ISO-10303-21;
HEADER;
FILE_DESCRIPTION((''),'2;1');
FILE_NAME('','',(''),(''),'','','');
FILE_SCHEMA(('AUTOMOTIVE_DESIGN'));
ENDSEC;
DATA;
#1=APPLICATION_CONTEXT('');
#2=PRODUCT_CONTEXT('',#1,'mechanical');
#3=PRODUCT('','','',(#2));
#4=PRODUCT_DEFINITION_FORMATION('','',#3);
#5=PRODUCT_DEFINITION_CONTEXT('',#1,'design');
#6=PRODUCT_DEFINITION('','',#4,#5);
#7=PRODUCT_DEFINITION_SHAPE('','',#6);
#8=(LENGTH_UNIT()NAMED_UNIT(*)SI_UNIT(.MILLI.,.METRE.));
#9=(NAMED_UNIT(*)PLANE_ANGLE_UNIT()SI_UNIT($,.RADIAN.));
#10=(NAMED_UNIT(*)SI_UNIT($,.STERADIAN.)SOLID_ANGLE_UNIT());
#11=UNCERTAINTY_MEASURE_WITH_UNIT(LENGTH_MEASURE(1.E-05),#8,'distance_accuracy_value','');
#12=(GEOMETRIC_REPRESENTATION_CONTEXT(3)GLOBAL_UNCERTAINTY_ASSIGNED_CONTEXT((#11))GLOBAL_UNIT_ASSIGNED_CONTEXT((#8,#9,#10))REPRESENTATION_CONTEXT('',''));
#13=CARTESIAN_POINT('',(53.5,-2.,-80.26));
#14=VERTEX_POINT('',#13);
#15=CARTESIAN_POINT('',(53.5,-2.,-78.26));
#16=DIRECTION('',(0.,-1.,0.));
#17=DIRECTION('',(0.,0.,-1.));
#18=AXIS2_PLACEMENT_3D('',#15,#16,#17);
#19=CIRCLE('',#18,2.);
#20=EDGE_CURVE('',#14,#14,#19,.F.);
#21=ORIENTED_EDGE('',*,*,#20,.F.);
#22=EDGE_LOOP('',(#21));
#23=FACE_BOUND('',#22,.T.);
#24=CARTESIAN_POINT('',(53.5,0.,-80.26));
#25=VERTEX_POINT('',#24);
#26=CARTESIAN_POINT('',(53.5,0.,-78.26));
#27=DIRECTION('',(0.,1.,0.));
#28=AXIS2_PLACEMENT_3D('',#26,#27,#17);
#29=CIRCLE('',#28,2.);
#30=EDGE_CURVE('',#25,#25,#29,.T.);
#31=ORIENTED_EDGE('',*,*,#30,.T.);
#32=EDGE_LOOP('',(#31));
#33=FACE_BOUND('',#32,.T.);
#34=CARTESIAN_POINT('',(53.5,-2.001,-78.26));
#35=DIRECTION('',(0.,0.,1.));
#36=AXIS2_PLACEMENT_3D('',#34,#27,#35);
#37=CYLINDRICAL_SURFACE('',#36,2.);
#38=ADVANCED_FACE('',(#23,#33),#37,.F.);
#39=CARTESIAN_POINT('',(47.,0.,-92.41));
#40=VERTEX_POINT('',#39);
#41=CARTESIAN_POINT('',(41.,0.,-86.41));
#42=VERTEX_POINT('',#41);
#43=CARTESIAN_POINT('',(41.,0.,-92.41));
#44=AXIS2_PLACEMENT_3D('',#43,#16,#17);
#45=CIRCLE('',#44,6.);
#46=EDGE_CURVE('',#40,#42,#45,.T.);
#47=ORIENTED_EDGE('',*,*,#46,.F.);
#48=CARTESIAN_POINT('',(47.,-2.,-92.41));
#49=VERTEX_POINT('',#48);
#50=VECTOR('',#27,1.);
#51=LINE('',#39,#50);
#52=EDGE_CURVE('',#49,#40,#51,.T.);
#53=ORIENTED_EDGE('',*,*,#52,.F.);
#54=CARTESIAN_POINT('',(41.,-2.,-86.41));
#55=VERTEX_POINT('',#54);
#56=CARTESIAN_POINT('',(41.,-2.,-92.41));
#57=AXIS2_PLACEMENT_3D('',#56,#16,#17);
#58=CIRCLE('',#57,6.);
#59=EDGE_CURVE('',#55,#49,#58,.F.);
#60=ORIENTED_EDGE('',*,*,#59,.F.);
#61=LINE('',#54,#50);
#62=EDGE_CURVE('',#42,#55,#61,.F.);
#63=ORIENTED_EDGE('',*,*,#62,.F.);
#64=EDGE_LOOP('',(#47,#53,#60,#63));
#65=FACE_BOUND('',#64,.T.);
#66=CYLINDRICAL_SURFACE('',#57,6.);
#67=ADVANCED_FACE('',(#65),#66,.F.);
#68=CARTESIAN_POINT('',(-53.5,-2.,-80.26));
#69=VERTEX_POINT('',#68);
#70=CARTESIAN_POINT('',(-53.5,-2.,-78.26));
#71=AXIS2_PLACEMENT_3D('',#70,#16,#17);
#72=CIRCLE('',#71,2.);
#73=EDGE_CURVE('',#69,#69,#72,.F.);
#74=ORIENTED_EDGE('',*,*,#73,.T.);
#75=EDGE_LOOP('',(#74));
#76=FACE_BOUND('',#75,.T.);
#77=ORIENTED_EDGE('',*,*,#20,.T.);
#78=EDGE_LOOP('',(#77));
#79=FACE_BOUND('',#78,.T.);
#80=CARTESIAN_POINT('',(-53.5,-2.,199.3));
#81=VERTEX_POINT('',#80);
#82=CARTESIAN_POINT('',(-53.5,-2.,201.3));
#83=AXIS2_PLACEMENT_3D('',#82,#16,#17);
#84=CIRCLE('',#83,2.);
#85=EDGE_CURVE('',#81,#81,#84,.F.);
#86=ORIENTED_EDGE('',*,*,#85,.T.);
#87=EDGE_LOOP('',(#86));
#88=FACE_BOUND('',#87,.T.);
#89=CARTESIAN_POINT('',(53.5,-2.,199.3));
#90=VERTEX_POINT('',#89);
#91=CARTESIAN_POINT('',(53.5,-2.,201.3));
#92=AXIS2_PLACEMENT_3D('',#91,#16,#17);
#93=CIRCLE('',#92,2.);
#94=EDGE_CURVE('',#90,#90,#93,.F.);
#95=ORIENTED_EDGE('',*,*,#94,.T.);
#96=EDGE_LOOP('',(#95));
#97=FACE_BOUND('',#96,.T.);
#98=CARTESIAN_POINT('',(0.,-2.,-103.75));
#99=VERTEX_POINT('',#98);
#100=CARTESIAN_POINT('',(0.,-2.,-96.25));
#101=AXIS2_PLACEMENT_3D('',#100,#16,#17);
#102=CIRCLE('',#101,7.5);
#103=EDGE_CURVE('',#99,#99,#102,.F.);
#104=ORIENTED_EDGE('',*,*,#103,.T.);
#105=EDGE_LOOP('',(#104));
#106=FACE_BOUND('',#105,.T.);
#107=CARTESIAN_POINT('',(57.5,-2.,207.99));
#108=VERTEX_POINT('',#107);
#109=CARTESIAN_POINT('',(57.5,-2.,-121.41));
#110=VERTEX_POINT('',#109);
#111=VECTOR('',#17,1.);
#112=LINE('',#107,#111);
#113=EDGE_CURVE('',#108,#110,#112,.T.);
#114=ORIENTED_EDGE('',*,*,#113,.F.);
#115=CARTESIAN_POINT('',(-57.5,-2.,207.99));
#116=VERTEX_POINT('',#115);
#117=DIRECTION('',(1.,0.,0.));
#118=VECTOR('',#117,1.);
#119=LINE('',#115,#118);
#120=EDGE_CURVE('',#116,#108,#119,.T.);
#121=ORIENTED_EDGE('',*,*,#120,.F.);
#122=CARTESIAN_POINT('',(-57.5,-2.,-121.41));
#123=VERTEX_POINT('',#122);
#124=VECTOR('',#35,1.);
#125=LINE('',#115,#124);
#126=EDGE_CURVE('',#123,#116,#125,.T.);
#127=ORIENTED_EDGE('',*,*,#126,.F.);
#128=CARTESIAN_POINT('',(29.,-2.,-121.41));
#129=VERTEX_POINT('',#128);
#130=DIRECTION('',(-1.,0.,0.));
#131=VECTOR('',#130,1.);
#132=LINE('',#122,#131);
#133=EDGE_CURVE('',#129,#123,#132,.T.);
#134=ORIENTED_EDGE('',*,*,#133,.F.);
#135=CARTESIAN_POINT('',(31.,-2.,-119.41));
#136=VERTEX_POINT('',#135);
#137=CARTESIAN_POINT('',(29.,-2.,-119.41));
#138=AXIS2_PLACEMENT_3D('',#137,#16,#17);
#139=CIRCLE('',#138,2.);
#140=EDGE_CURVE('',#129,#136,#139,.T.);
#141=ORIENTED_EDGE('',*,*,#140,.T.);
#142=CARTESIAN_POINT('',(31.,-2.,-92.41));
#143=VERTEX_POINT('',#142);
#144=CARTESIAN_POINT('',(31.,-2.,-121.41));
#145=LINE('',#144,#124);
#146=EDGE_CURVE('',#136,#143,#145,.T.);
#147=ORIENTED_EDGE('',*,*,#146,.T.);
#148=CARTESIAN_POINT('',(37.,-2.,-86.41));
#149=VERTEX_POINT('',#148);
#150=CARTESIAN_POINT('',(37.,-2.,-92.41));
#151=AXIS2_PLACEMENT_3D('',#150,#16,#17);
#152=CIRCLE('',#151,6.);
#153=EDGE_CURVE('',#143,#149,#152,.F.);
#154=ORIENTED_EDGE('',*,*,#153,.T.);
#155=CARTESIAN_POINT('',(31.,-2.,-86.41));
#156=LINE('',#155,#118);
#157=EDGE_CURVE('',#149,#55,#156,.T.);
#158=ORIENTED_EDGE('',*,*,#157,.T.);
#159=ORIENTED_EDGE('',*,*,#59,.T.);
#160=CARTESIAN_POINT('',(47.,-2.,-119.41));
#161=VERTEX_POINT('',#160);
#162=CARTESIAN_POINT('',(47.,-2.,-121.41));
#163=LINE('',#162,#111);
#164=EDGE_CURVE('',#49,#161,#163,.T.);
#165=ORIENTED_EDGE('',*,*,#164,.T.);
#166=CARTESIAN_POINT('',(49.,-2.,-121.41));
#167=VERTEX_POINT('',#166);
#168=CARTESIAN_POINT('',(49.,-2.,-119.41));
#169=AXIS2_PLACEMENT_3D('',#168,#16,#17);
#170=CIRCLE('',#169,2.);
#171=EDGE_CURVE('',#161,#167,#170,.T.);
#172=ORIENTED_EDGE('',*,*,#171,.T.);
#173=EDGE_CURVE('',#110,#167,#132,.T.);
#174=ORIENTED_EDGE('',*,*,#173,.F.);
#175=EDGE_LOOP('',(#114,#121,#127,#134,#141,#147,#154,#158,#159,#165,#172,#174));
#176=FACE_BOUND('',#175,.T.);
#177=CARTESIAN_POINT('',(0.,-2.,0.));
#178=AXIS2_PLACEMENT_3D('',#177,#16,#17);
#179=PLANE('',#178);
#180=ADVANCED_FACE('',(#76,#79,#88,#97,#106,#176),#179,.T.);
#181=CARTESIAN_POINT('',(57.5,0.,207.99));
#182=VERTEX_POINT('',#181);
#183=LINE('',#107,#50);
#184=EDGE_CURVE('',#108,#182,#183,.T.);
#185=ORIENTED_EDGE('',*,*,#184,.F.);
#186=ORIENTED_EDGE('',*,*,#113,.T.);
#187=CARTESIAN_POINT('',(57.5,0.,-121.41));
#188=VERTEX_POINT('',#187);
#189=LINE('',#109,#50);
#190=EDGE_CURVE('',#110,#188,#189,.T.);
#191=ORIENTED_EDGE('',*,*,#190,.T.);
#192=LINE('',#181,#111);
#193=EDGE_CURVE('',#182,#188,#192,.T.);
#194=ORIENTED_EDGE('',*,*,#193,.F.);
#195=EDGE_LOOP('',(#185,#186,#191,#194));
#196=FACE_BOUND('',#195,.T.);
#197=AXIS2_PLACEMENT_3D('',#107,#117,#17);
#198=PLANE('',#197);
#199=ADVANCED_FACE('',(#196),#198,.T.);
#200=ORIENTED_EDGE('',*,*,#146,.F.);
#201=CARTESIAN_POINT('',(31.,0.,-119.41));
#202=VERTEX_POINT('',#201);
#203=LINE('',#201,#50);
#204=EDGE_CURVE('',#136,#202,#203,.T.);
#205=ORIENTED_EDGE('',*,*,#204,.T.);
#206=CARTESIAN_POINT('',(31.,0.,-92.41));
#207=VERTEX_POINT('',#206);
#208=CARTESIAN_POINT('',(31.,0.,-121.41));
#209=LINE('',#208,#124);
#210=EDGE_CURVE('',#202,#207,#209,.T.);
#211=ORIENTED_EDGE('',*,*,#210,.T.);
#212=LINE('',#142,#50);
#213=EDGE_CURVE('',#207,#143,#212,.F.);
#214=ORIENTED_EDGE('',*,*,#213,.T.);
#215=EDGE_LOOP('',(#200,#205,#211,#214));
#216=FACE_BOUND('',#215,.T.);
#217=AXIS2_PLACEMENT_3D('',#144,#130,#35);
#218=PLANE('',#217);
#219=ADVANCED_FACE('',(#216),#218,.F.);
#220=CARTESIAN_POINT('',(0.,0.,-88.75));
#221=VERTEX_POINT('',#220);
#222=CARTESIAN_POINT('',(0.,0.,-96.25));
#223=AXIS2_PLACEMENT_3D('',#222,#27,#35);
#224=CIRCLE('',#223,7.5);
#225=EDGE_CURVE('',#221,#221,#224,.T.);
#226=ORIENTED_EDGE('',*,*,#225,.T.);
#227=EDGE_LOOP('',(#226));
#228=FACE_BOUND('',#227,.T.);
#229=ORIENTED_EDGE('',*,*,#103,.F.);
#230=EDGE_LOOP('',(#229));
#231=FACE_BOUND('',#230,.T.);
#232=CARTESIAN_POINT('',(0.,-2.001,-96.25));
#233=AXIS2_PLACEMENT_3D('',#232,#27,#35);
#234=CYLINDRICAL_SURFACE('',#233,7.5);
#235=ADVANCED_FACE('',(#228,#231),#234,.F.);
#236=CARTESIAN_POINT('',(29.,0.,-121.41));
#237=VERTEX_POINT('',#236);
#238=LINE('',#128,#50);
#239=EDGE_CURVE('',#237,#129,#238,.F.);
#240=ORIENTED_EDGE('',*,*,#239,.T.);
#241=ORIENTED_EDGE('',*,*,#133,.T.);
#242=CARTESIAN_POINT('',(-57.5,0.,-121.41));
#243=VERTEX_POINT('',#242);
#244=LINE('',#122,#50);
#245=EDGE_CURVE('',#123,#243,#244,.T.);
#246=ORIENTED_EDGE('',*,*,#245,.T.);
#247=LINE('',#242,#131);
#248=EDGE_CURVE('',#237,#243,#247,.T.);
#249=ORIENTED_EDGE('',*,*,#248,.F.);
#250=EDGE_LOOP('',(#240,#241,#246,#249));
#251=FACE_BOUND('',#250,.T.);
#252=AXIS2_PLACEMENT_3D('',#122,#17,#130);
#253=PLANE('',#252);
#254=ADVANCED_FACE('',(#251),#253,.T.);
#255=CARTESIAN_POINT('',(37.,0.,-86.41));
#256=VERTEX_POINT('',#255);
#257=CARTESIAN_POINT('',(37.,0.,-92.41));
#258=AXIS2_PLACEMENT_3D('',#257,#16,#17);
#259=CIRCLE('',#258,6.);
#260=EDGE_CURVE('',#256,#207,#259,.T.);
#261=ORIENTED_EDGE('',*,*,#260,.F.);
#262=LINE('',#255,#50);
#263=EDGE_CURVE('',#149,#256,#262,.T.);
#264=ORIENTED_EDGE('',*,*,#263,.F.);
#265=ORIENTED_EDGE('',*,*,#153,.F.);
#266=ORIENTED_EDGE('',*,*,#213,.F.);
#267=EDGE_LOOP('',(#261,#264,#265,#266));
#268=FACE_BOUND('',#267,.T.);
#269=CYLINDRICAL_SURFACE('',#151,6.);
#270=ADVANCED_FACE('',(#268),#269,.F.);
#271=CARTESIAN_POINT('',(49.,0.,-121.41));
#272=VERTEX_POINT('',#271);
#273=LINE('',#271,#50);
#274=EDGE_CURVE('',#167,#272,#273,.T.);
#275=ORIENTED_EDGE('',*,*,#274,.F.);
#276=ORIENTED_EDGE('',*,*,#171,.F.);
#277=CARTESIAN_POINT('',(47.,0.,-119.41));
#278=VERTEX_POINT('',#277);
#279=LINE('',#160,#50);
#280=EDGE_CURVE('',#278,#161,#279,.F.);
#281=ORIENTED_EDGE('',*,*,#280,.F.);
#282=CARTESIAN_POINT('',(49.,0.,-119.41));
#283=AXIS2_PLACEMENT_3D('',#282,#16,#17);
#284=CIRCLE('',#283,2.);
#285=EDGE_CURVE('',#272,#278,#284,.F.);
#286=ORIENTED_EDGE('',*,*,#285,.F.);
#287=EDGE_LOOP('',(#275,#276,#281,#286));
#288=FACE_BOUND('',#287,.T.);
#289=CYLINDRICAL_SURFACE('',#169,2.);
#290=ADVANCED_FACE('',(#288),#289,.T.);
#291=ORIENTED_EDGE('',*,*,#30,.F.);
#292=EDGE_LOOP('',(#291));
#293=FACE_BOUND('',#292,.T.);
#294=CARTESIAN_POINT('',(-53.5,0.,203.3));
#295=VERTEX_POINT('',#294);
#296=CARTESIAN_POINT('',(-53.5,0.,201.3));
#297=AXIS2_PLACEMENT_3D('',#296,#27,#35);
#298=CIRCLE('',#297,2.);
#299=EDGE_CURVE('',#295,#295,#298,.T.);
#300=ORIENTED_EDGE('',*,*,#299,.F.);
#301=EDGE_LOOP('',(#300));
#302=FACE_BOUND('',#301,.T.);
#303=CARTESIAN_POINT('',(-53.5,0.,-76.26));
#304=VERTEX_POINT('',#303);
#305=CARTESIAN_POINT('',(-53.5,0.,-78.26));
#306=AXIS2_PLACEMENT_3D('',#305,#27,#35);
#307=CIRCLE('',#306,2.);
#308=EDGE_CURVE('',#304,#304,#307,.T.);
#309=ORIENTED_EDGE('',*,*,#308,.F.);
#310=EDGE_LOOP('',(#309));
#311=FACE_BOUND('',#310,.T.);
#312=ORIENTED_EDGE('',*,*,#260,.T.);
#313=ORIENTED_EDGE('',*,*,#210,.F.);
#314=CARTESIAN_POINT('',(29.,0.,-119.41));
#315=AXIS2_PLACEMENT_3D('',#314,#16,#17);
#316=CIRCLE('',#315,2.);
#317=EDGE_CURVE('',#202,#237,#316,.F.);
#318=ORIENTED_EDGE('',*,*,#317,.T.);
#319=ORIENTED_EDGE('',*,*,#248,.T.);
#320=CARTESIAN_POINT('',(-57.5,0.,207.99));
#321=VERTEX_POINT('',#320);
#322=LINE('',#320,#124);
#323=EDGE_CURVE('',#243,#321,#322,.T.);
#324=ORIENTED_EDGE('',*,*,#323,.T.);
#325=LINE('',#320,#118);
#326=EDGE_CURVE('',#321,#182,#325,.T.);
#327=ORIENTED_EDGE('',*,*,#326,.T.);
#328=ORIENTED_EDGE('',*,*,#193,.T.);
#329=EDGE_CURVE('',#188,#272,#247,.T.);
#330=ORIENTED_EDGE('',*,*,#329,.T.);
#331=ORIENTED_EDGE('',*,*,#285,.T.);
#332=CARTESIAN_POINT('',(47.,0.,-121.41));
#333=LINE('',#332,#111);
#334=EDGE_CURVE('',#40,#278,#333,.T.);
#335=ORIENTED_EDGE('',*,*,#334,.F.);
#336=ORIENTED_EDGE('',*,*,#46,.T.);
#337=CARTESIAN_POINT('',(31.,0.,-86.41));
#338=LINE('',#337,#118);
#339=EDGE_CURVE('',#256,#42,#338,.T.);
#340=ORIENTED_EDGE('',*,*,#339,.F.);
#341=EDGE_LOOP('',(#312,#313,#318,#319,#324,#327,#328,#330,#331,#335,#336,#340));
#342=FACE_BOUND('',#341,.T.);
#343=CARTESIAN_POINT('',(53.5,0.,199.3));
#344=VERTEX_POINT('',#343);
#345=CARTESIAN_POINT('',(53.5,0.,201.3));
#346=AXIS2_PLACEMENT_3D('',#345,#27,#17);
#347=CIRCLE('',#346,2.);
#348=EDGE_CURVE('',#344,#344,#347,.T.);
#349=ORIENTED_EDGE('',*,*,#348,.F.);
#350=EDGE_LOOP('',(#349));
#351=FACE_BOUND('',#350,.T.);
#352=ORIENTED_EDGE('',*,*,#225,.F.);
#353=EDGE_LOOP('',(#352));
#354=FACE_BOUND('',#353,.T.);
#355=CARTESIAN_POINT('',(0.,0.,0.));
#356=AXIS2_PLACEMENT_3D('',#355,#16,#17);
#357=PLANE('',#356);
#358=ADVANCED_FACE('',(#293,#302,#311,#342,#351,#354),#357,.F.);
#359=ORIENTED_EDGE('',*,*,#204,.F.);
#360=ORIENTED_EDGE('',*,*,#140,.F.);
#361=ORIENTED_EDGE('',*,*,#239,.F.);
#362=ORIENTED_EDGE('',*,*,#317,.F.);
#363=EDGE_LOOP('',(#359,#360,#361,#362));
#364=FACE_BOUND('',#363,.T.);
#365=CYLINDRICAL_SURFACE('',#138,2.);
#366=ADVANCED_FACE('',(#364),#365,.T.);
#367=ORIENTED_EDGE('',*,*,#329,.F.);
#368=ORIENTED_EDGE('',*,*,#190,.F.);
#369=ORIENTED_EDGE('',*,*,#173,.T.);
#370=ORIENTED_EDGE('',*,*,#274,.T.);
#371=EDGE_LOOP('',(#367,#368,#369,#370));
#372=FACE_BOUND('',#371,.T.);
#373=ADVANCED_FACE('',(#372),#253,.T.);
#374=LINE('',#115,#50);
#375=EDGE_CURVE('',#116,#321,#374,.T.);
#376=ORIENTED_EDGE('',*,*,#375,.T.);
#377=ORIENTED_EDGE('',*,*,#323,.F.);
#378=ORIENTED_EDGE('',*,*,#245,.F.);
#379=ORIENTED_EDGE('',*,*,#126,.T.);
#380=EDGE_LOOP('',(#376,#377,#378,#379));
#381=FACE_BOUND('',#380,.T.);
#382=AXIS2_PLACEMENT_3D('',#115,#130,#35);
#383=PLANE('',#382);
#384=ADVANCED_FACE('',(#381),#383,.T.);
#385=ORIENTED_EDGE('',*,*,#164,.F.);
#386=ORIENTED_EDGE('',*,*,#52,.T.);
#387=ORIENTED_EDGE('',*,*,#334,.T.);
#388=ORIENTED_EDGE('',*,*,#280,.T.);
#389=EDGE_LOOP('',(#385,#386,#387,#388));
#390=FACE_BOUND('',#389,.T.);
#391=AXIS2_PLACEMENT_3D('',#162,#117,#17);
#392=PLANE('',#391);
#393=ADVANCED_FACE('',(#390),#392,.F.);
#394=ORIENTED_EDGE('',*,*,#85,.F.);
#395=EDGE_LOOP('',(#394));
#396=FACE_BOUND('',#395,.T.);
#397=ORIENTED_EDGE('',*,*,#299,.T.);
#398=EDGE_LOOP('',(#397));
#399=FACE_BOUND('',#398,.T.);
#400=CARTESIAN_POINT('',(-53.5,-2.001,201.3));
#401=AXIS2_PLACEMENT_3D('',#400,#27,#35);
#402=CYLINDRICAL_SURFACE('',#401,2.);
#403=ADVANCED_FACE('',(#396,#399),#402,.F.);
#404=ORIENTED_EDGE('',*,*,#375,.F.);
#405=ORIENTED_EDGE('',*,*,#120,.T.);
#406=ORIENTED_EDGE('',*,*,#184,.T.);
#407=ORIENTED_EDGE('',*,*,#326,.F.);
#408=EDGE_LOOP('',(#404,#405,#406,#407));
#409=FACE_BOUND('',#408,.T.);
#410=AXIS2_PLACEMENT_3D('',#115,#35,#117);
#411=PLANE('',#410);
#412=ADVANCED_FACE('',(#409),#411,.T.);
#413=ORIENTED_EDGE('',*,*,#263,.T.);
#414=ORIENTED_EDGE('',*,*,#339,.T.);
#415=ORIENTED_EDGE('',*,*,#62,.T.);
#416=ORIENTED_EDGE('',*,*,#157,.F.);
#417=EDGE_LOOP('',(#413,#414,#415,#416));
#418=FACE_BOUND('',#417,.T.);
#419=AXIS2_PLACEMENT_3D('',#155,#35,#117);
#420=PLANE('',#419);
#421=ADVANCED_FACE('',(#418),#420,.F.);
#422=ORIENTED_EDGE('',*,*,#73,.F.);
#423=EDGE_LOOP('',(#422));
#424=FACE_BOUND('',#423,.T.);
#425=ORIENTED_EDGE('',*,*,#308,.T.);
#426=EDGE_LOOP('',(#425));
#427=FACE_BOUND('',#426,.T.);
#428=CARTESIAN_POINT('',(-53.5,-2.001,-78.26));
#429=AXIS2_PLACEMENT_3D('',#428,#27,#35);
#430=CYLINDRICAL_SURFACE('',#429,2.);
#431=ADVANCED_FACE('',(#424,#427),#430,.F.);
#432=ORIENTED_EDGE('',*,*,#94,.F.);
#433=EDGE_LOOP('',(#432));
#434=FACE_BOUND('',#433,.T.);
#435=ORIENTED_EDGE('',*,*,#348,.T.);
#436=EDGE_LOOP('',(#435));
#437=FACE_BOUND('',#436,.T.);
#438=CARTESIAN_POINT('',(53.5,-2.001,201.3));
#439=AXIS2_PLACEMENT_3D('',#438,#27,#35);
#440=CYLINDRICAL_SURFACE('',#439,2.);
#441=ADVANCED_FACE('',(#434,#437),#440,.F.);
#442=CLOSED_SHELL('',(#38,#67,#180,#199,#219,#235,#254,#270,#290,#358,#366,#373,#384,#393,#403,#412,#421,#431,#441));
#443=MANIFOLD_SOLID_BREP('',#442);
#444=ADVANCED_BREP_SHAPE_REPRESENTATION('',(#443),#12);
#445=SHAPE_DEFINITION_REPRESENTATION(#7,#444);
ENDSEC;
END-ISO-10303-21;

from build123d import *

# Parameters (mm, degrees)
CROQUIS12_W           = 115
CROQUIS12_H           = 329.4
BRIDA_BASE2_DEPTH     = 2
CORTAR_EXTRUIR6_REACH = 217.801
CROQUIS27_R           = 2
CORTAR_EXTRUIR7_REACH = 217.801
CROQUIS28_R           = 7.5
CROQUIS29_W           = 16
CROQUIS29_H           = 35
CORTAR_EXTRUIR8_DEPTH = 216.801042861
REDONDEO1_R           = 6
REDONDEO2_R           = 2


# Sheet-metal steps are written as plain solids
with BuildPart() as part:
    # Croquis12 → Brida base2 (new body)
    with BuildSketch(Plane(origin=(0, 0, 0), x_dir=(1, 0, 0), z_dir=(0, 1, 0))):
        with Locations((0, -43.29)):
            Rectangle(CROQUIS12_W, CROQUIS12_H)
    extrude(amount=-BRIDA_BASE2_DEPTH)

    # Croquis27 → Cortar-Extruir6 (cut, up to next)
    with BuildSketch(Plane(origin=(0, 0, 0), x_dir=(1, 0, 0), z_dir=(0, 1, 0)), mode=Mode.PRIVATE) as cortar_extruir6_sk1:
        with Locations(Location((-53.5, -201.3, 0), (0, 0, 270))):
            Circle(CROQUIS27_R)
    cortar_extruir6_tool1 = extrude(cortar_extruir6_sk1.sketch, amount=-CORTAR_EXTRUIR6_REACH, mode=Mode.PRIVATE) & part.part
    # Croquis27 → Cortar-Extruir6 (cut, up to next)
    with BuildSketch(Plane(origin=(0, 0, 0), x_dir=(1, 0, 0), z_dir=(0, 1, 0)), mode=Mode.PRIVATE) as cortar_extruir6_sk2:
        with Locations(Location((-53.5, 78.26, 0), (0, 0, 270))):
            Circle(CROQUIS27_R)
    cortar_extruir6_tool2 = extrude(cortar_extruir6_sk2.sketch, amount=-CORTAR_EXTRUIR6_REACH, mode=Mode.PRIVATE) & part.part
    # Croquis27 → Cortar-Extruir6 (cut, up to next)
    with BuildSketch(Plane(origin=(0, 0, 0), x_dir=(1, 0, 0), z_dir=(0, 1, 0)), mode=Mode.PRIVATE) as cortar_extruir6_sk3:
        with Locations(Location((53.5, 78.26, 0), (0, 0, 90))):
            Circle(CROQUIS27_R)
    cortar_extruir6_tool3 = extrude(cortar_extruir6_sk3.sketch, amount=-CORTAR_EXTRUIR6_REACH, mode=Mode.PRIVATE) & part.part
    # Croquis27 → Cortar-Extruir6 (cut, up to next)
    with BuildSketch(Plane(origin=(0, 0, 0), x_dir=(1, 0, 0), z_dir=(0, 1, 0)), mode=Mode.PRIVATE) as cortar_extruir6_sk4:
        with Locations(Location((53.5, -201.3, 0), (0, 0, 90))):
            Circle(CROQUIS27_R)
    cortar_extruir6_tool4 = extrude(cortar_extruir6_sk4.sketch, amount=-CORTAR_EXTRUIR6_REACH, mode=Mode.PRIVATE) & part.part
    add(cortar_extruir6_tool1.solids().sort_by_distance((-53.5, 0, 201.3))[0], mode=Mode.SUBTRACT)
    add(cortar_extruir6_tool2.solids().sort_by_distance((-53.5, 0, -78.26))[0], mode=Mode.SUBTRACT)
    add(cortar_extruir6_tool3.solids().sort_by_distance((53.5, 0, -78.26))[0], mode=Mode.SUBTRACT)
    add(cortar_extruir6_tool4.solids().sort_by_distance((53.5, 0, 201.3))[0], mode=Mode.SUBTRACT)

    # Croquis28 → Cortar-Extruir7 (cut, up to next)
    with BuildSketch(Plane(origin=(0, 0, 0), x_dir=(1, 0, 0), z_dir=(0, 1, 0)), mode=Mode.PRIVATE) as cortar_extruir7_sk1:
        with Locations(Location((0, 96.25, 0), (0, 0, 270))):
            Circle(CROQUIS28_R)
    cortar_extruir7_tool1 = extrude(cortar_extruir7_sk1.sketch, amount=-CORTAR_EXTRUIR7_REACH, mode=Mode.PRIVATE) & part.part
    add(cortar_extruir7_tool1.solids().sort_by_distance((0, 0, -96.25))[0], mode=Mode.SUBTRACT)

    # Croquis29 → Cortar-Extruir8 (cut, through all)
    with BuildSketch(Plane(origin=(0, 0, 0), x_dir=(1, 0, 0), z_dir=(0, 1, 0))):
        with Locations((39, 103.91)):
            Rectangle(CROQUIS29_W, CROQUIS29_H)
    extrude(amount=-CORTAR_EXTRUIR8_DEPTH, mode=Mode.SUBTRACT)

    # Redondeo1
    redondeo1_edges = [part.edges().sort_by_distance(p)[0] for p in [
        (31, -1, -86.41),
        (47, -1, -86.41),
    ]]
    fillet(redondeo1_edges, radius=REDONDEO1_R)

    # Redondeo2
    redondeo2_edges = [part.edges().sort_by_distance(p)[0] for p in [
        (31, -1, -121.41),
        (47, -1, -121.41),
    ]]
    fillet(redondeo2_edges, radius=REDONDEO2_R)


solid = part.part
